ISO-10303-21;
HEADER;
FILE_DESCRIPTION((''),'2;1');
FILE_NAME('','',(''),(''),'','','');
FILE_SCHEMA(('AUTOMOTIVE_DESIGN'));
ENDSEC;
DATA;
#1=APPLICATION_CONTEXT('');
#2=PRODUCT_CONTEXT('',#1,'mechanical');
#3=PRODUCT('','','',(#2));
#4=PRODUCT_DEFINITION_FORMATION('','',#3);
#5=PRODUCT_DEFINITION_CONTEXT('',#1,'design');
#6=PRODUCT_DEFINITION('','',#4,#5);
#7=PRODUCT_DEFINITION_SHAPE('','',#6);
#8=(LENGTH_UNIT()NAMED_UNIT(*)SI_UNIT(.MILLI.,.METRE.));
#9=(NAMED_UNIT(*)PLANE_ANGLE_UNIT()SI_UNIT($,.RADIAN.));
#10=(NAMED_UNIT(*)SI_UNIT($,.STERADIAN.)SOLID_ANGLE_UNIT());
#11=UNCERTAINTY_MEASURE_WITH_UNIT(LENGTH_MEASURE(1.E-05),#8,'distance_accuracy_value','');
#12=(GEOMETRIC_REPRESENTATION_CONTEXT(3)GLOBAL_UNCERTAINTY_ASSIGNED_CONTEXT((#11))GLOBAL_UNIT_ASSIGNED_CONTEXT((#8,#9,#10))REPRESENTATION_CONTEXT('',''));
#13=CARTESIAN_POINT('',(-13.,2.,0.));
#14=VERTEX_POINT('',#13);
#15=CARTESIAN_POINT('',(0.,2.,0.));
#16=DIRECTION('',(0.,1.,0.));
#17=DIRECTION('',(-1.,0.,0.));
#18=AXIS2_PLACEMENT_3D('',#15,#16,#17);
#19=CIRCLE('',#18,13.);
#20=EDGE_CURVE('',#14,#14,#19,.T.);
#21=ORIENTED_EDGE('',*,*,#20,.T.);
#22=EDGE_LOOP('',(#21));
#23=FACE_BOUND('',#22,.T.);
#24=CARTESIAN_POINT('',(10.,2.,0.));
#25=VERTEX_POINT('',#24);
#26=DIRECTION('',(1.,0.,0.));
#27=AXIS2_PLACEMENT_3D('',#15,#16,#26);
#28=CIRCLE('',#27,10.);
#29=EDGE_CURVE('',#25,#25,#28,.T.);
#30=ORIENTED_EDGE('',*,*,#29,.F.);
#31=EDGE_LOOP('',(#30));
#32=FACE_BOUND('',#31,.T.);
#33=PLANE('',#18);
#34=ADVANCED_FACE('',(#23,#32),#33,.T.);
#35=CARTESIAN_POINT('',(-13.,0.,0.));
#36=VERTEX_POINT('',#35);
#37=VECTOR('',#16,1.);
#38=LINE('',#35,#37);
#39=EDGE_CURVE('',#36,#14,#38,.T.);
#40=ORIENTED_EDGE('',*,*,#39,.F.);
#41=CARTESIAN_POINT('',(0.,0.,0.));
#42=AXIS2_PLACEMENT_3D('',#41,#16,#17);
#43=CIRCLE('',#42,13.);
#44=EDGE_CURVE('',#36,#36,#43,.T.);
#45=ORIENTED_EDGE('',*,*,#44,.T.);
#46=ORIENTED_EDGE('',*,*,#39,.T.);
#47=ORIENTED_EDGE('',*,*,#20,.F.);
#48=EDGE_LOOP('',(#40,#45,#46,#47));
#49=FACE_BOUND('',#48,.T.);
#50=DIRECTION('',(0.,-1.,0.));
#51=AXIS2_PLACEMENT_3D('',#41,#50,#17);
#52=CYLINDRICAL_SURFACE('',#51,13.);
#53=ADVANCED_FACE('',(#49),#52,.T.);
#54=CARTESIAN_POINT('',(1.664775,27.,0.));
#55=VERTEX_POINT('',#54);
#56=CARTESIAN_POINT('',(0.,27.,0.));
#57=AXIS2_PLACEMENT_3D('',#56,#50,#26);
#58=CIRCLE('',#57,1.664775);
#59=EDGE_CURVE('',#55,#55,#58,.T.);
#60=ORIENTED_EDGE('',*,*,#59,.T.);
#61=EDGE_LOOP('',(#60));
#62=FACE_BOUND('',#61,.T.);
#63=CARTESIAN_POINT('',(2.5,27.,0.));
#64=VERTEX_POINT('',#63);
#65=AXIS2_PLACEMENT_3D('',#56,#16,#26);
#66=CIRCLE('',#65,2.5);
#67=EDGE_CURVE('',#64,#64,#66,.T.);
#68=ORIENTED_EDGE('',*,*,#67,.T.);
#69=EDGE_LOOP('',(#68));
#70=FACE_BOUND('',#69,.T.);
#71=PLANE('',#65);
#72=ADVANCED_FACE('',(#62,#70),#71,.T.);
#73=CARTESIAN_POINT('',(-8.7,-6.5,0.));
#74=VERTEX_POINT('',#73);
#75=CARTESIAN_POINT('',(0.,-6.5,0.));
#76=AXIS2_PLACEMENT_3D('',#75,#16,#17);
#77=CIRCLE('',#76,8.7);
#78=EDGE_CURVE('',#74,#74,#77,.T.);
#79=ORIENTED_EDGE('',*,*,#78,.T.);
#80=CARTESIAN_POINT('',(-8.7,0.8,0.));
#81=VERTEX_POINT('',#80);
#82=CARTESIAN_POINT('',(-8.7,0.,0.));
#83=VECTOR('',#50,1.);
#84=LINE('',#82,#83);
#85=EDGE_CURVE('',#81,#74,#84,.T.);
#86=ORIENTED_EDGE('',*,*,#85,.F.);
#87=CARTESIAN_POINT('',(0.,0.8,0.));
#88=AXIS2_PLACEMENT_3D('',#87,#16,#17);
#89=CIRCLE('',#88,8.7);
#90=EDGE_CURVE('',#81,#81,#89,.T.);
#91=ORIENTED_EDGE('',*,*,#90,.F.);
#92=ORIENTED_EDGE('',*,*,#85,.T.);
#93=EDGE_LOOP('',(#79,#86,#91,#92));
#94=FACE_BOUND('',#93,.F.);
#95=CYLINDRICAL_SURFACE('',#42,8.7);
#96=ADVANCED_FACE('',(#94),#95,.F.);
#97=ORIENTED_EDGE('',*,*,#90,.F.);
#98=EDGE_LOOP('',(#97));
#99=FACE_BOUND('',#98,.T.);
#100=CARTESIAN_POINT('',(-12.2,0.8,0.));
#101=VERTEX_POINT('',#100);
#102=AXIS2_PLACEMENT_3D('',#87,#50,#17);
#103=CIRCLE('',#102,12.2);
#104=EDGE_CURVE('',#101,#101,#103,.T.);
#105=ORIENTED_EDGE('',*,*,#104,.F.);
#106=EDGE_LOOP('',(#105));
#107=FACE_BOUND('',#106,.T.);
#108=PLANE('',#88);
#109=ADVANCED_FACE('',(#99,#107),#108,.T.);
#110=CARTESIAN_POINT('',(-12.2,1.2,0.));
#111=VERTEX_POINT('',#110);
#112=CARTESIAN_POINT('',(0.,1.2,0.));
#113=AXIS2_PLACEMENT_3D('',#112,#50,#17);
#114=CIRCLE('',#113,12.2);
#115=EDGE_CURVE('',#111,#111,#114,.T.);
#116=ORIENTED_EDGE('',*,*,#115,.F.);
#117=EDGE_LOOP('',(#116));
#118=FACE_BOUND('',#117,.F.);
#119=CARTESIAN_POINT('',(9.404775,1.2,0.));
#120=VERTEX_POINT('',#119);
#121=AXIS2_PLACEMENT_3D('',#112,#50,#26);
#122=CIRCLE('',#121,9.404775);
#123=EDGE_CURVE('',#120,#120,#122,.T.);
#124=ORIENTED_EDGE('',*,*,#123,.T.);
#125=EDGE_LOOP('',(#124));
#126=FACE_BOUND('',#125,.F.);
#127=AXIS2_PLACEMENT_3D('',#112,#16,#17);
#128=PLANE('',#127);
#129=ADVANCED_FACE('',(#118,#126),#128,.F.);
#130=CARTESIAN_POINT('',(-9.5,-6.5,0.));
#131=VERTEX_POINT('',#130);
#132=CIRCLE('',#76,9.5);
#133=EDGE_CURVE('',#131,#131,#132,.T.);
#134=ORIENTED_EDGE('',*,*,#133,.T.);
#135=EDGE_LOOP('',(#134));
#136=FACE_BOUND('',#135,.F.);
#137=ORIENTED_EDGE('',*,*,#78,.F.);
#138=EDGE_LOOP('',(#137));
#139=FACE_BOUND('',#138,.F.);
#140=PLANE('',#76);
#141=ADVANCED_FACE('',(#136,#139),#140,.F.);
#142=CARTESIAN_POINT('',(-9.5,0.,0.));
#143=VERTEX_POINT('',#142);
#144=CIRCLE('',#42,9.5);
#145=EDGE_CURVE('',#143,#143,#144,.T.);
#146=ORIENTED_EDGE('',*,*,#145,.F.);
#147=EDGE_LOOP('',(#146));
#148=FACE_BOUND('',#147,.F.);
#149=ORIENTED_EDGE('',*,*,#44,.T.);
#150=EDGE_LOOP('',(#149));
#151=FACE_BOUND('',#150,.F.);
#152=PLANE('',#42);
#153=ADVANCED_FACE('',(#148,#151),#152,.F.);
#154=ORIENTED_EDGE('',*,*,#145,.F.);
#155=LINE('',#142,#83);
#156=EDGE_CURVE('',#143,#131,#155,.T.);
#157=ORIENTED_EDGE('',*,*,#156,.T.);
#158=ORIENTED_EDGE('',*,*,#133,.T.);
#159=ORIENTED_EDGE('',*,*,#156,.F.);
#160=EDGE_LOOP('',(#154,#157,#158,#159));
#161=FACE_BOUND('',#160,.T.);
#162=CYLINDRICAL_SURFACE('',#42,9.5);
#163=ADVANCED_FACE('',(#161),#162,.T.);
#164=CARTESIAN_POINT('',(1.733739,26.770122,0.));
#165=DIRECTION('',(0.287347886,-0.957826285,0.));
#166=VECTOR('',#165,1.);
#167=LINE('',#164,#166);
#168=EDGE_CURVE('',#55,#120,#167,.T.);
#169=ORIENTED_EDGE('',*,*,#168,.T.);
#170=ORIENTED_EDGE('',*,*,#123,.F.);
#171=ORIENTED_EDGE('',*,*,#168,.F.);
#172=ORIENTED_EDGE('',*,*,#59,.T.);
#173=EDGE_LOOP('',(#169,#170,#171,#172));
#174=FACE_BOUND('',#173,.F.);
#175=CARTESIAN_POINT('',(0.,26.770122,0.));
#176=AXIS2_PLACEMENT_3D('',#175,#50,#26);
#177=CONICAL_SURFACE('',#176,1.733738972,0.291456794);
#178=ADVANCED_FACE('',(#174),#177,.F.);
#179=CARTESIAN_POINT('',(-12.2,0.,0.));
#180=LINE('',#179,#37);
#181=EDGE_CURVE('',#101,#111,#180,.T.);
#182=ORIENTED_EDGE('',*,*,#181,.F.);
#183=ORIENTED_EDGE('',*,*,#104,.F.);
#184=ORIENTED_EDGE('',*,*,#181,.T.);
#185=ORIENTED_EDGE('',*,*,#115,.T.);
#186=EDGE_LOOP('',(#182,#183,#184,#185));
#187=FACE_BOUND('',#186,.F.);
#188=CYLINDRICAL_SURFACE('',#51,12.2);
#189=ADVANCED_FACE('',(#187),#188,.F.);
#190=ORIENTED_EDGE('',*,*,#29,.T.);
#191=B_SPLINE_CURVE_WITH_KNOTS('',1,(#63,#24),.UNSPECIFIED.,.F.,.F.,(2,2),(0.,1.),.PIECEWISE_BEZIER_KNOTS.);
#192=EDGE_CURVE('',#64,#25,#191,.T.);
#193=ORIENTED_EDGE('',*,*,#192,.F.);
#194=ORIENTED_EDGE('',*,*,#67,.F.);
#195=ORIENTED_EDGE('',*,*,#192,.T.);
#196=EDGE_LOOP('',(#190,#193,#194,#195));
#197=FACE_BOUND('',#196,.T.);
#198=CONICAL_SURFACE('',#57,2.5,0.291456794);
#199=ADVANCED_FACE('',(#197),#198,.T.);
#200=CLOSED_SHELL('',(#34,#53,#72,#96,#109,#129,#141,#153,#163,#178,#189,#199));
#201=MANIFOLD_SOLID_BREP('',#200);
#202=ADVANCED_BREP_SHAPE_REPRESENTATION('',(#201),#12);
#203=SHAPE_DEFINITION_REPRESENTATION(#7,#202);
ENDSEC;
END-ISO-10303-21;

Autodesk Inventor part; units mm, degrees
ref_plane "YZ Plane" through (0, 0, 0) normal (1, 0, 0) x (0, 1, 0)
ref_plane "XZ Plane" through (0, 0, 0) normal (0, 1, 0) x (-1, 0, 0)
sketch "Sketch1" plane through (0, 0, 0) normal (0, 1, 0) x (-1, 0, 0)
  circle A0 centre (0, 0) radius 9.5
  circle A1 centre (0, 0) radius 13
  dimension "d0" = 19
  dimension "d3" = 26
extrude "Extrusion1" add sketch "Sketch1" against normal blind 6.5 contours A0
extrude "Extrusion2" add sketch "Sketch1" along normal blind 2 contours A0 | A1
sketch "Sketch2" plane through (0, 2, 0) normal (0, 1, 0) x (1, 0, 0)
  circle A0 centre (0, 0) radius 13 projected
  circle A1 centre (0, 0) radius 10
  dimension "d6" = 20
ref_plane "Work Plane1" through (0, 27, 0) normal (0, 1, 0) x (1, 0, 0)
sketch "Sketch3" plane through (0, 27, 0) normal (0, 1, 0) x (1, 0, 0)
  circle A0 centre (0, 0) radius 2.5
  dimension "d8" = 5
loft "Loft1" add profiles "Sketch3", "Sketch2" contours all / A1
shell "Shell1" thickness 0.8 removed faces 2 at (1.2612, 27, 0.6619) at (-2.3703, -6.5, -2.0999)
properties part number "Microsuction"
